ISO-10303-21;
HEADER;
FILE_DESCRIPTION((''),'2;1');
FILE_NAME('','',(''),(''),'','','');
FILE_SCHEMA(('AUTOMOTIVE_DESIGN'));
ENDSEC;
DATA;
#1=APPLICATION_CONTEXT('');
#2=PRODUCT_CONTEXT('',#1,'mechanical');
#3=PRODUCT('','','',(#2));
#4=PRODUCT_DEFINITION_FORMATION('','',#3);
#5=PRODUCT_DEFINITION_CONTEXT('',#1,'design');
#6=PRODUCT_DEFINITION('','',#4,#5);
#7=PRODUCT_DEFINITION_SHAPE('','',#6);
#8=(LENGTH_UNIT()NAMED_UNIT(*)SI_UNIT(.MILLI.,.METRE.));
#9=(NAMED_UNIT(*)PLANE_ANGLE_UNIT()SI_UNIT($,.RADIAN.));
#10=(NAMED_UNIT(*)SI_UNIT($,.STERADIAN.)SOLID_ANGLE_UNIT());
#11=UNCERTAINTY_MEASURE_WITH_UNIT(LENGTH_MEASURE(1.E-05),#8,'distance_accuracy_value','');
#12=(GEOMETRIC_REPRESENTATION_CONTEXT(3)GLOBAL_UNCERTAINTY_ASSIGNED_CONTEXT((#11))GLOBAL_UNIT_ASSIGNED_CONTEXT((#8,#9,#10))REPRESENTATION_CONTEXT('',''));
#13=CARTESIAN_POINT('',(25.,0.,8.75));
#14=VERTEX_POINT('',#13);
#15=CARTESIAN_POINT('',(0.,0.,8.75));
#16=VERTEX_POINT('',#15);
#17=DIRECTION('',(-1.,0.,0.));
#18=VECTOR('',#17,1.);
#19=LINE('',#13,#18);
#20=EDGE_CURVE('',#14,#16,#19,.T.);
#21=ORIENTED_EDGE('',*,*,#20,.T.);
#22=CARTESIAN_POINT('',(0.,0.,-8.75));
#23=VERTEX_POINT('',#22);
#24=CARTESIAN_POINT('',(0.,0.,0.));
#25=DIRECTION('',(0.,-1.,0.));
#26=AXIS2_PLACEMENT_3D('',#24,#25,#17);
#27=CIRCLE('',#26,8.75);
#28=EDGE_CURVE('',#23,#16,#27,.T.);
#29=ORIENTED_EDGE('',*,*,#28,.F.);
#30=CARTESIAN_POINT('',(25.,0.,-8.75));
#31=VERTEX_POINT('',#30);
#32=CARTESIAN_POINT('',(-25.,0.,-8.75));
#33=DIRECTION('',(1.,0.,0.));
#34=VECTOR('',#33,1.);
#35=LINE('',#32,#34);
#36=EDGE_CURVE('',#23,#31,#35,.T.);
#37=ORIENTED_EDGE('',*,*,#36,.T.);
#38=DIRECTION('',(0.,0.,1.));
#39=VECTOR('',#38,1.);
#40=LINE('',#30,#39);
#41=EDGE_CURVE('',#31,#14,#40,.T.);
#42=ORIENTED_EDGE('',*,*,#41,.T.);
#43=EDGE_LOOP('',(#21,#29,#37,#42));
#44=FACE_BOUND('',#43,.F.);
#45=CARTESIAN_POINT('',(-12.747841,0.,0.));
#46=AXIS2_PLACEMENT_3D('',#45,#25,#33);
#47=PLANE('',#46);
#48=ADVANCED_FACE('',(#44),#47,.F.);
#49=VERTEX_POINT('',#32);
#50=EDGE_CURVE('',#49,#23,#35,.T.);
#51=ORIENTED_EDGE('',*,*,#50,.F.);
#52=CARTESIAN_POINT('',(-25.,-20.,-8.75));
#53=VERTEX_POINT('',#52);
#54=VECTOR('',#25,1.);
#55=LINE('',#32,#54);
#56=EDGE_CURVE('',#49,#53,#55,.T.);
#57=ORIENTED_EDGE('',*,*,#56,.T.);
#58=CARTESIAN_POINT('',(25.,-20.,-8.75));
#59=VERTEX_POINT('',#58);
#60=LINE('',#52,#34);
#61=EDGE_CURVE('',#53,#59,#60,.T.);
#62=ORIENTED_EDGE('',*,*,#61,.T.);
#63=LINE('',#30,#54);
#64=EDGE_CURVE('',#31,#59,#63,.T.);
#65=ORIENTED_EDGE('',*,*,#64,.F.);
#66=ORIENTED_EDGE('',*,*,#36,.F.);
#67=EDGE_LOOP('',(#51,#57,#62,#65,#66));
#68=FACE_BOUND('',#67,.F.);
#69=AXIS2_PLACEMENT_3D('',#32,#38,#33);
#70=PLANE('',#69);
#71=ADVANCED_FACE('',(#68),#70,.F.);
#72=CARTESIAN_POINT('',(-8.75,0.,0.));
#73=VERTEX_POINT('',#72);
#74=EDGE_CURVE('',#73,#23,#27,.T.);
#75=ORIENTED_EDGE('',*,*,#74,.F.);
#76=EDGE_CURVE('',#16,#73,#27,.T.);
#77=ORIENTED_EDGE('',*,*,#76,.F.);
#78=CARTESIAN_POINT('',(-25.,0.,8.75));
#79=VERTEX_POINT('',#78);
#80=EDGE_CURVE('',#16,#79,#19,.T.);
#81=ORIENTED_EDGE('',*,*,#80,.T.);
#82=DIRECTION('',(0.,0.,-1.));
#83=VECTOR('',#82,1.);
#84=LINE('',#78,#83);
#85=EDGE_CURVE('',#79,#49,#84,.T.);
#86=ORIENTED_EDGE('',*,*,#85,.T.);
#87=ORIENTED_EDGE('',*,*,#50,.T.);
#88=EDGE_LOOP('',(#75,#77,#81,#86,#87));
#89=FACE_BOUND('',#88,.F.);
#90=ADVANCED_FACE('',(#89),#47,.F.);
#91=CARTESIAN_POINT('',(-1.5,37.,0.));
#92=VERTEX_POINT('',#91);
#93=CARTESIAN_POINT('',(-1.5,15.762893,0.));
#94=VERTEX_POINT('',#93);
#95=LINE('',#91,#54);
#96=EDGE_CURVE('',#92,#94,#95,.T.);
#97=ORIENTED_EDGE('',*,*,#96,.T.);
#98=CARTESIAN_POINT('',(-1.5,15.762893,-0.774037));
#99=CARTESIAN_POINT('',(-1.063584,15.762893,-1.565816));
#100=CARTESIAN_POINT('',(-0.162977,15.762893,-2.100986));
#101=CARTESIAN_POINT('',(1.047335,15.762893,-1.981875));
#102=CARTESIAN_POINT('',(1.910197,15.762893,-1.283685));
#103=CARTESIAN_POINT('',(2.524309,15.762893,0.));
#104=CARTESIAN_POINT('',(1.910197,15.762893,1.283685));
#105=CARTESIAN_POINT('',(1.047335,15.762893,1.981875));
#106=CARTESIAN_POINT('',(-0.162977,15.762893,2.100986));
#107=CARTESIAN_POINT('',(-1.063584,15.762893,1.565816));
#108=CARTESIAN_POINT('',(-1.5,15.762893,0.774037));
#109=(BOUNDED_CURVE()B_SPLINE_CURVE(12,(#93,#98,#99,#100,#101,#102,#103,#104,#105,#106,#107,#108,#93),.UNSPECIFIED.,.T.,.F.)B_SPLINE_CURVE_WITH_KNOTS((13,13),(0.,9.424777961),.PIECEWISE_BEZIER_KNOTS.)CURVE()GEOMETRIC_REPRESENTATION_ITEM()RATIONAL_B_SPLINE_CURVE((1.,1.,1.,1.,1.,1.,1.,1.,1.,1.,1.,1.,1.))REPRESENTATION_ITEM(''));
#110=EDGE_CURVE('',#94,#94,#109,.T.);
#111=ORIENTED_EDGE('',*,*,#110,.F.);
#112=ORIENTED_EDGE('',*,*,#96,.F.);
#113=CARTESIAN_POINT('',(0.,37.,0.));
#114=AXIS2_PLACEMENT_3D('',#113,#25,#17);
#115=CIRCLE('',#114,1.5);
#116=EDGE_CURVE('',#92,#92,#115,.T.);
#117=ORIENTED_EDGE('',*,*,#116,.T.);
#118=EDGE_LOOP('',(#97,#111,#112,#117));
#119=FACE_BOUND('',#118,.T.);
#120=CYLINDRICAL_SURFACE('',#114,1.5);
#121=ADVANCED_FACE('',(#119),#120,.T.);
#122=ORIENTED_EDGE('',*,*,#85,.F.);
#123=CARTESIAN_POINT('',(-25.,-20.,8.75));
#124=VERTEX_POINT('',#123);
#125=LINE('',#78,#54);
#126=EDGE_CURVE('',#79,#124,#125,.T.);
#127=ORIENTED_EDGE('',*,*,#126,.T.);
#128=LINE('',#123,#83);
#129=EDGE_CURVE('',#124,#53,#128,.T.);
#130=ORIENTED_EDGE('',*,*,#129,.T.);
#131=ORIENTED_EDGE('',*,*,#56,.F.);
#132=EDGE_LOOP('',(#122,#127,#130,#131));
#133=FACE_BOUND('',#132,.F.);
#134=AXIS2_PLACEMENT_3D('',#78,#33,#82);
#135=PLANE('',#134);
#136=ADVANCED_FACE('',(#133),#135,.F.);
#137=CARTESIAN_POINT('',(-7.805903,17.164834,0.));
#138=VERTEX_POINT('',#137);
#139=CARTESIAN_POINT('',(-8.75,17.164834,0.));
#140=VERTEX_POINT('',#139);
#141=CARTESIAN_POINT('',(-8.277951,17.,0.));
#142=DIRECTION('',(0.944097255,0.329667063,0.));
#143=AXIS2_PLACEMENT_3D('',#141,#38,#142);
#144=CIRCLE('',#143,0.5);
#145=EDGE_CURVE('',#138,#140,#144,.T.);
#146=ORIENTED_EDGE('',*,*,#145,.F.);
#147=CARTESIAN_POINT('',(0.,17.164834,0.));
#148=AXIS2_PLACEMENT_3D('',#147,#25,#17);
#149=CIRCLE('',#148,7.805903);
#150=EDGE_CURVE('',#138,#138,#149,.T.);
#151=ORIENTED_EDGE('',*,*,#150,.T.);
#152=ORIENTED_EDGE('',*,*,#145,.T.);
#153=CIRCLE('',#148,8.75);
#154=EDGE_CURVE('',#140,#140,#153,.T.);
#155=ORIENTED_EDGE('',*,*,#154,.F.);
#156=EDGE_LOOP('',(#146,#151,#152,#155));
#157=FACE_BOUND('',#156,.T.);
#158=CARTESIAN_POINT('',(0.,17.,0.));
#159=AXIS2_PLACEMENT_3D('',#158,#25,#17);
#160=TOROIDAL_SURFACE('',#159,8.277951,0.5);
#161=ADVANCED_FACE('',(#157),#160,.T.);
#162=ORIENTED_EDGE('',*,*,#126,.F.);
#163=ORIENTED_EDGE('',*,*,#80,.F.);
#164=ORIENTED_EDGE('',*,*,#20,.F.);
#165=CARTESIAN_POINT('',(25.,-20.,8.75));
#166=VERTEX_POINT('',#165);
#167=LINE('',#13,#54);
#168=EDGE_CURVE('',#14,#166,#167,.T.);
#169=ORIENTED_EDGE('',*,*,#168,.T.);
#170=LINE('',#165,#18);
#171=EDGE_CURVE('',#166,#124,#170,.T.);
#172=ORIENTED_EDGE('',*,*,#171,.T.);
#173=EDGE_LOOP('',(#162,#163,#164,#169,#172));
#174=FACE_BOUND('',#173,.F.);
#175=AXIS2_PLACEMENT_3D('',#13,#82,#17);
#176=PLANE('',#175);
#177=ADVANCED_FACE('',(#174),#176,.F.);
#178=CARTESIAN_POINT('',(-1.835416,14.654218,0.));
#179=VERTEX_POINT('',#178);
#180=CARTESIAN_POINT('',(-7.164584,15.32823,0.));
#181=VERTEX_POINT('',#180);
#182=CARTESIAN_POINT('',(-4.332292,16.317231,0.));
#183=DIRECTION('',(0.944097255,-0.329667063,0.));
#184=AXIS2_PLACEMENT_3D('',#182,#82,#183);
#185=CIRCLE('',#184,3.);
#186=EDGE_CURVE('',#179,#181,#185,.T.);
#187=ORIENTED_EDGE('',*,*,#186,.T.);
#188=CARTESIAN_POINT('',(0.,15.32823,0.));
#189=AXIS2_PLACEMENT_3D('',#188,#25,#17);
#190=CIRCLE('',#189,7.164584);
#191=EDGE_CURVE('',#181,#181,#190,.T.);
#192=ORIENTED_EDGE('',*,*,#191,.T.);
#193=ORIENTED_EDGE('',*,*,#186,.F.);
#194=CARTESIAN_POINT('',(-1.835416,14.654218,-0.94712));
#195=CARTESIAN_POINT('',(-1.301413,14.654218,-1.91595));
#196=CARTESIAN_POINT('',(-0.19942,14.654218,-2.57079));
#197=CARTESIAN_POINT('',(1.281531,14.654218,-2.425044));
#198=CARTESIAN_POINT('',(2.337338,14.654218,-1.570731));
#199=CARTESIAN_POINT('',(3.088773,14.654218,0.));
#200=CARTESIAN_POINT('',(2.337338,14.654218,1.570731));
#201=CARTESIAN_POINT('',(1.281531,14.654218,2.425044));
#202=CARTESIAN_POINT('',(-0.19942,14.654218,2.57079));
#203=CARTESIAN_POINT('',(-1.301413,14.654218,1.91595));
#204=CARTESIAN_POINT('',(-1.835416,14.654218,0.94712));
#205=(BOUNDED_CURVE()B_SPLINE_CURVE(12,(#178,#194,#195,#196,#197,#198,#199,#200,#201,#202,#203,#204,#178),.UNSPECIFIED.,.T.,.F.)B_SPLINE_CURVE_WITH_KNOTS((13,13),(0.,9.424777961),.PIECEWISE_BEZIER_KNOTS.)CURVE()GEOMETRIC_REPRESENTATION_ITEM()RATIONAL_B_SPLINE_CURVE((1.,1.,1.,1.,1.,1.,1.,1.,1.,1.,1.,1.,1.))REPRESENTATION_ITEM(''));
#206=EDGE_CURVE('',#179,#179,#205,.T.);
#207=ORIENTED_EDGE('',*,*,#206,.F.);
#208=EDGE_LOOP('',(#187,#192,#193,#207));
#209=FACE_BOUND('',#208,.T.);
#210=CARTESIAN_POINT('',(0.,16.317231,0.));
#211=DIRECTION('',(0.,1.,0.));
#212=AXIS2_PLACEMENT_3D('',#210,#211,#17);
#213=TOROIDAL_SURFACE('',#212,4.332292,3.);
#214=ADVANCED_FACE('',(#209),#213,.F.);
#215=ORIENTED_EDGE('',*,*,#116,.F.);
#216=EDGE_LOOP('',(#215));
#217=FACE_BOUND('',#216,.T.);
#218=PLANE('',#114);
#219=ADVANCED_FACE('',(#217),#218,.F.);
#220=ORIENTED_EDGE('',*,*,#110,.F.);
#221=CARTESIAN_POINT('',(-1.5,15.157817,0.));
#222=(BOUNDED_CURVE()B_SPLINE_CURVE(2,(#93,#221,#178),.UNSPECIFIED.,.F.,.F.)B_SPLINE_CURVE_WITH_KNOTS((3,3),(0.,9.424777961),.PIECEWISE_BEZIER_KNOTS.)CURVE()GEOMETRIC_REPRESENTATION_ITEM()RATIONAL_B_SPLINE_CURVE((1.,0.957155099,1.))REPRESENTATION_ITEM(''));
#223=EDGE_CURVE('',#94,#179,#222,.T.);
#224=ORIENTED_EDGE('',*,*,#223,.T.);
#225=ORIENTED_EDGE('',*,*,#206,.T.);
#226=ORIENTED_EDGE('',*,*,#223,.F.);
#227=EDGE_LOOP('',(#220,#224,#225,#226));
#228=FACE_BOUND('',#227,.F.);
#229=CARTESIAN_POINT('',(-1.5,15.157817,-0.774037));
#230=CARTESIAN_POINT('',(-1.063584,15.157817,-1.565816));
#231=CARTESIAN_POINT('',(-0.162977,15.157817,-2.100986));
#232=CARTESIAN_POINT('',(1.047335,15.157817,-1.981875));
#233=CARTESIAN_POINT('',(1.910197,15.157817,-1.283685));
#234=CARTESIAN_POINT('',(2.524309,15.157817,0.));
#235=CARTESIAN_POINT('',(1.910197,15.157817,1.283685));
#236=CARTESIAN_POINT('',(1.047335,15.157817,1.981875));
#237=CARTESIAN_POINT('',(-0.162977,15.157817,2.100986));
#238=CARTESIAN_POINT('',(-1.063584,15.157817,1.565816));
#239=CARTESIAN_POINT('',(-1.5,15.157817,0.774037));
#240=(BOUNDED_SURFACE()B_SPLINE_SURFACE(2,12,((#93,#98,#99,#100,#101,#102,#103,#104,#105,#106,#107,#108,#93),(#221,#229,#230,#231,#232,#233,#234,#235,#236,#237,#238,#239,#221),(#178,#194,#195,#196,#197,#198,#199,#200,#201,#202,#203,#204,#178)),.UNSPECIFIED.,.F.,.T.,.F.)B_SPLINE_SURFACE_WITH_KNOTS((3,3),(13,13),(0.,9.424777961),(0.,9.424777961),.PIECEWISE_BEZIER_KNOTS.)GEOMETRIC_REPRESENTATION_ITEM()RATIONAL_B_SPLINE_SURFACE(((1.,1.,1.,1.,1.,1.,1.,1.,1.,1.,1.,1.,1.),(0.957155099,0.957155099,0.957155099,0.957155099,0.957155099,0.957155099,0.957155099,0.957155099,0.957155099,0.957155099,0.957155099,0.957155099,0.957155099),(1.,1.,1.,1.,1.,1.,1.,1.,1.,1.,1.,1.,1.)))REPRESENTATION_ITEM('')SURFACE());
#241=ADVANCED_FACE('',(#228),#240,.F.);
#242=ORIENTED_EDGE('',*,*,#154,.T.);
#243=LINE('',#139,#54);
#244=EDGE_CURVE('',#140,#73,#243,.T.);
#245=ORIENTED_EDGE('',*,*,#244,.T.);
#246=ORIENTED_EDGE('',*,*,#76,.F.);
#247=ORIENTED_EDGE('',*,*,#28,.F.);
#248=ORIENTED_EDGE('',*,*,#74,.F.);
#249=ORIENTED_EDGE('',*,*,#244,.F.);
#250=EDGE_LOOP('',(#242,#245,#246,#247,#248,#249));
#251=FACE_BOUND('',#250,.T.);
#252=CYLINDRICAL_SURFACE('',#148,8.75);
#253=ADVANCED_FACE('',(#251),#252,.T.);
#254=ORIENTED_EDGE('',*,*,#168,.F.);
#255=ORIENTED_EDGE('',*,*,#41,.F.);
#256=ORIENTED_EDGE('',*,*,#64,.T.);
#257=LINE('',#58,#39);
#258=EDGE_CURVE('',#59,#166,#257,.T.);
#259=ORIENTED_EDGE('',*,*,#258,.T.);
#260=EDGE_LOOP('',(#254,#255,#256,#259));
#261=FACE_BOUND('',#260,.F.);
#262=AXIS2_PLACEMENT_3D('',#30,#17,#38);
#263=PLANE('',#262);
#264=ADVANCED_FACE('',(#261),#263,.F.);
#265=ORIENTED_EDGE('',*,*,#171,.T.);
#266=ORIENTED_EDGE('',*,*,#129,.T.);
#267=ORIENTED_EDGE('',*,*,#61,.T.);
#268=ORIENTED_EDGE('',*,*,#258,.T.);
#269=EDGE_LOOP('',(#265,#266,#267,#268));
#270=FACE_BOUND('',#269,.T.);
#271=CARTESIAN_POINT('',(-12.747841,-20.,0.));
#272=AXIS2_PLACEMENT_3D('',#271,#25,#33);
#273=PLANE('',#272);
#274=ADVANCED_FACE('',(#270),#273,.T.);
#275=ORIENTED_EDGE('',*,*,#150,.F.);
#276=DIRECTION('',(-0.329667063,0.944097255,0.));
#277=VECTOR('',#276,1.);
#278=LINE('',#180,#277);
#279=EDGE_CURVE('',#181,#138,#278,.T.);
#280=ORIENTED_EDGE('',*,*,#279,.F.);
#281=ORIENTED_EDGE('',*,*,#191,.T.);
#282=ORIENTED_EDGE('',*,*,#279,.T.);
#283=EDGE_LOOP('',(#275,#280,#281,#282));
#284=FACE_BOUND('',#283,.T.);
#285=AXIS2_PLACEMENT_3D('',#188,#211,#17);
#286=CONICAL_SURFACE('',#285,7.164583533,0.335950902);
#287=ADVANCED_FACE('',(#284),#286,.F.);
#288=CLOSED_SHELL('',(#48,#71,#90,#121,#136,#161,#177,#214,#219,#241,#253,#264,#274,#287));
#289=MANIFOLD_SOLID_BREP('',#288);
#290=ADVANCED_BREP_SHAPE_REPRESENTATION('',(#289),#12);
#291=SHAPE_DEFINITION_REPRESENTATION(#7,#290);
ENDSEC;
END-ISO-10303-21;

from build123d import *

# Parameters (mm, degrees)
F2_R     = 2
F4_DEPTH = 20


with BuildPart() as f1:
    # F0 (on Top) → F1 (revolve)
    with BuildSketch(Plane.XY):
        with BuildLine():
            Line((-8.75, 0), (0, 0))
            Line((0, 0), (0, 37))
            Line((0, 37), (-1.5, 37))
            Line((-1.5, 37), (-1.5, 15.3282299509))
            ThreePointArc((-1.5, 15.3282299509), (-4.3322917664, 13.3172311391), (-7.1645835327, 15.3282299509))
            Line((-7.1645835327, 15.3282299509), (-7.8059027445, 17.1648335314))
            ThreePointArc((-7.8059027445, 17.1648335314), (-8.2779513723, 17.5), (-8.75, 17.1648335314))
            Line((-8.75, 17.1648335314), (-8.75, 0))
        make_face()
    revolve(axis=Axis((0, 18.5, 0), (0, -1, 0)))

    # F2
    f2_edges = [f1.edges().sort_by_distance(p)[0] for p in [
        (1.5, 15.32823, 0),
    ]]
    fillet(f2_edges, radius=F2_R)

    # F3 (on face) → F4 (join)
    with BuildSketch(Plane.XZ):
        with BuildLine():
            Line((9.5e-09, 8.75), (-25, 8.75))
            Line((-25, 8.75), (-25, -8.75))
            Line((-25, -8.75), (0, -8.75))
            ThreePointArc((0, -8.75), (-8.75, 4.8e-09), (9.5e-09, 8.75))
        make_face()
        with BuildLine():
            Line((25, 8.75), (9.5e-09, 8.75))
            ThreePointArc((9.5e-09, 8.75), (6.1871843388, 6.187184332), (8.75, 0))
            ThreePointArc((8.75, 0), (6.1871843354, -6.1871843354), (0, -8.75))
            Line((0, -8.75), (25, -8.75))
            Line((25, -8.75), (25, 8.75))
        make_face()
        with BuildLine():
            ThreePointArc((8.75, 0), (6.1871843388, 6.187184332), (9.5e-09, 8.75))
            ThreePointArc((9.5e-09, 8.75), (-8.75, 4.8e-09), (0, -8.75))
            ThreePointArc((0, -8.75), (6.1871843354, -6.1871843354), (8.75, 0))
        make_face()
    extrude(amount=F4_DEPTH)


solid = f1.part
